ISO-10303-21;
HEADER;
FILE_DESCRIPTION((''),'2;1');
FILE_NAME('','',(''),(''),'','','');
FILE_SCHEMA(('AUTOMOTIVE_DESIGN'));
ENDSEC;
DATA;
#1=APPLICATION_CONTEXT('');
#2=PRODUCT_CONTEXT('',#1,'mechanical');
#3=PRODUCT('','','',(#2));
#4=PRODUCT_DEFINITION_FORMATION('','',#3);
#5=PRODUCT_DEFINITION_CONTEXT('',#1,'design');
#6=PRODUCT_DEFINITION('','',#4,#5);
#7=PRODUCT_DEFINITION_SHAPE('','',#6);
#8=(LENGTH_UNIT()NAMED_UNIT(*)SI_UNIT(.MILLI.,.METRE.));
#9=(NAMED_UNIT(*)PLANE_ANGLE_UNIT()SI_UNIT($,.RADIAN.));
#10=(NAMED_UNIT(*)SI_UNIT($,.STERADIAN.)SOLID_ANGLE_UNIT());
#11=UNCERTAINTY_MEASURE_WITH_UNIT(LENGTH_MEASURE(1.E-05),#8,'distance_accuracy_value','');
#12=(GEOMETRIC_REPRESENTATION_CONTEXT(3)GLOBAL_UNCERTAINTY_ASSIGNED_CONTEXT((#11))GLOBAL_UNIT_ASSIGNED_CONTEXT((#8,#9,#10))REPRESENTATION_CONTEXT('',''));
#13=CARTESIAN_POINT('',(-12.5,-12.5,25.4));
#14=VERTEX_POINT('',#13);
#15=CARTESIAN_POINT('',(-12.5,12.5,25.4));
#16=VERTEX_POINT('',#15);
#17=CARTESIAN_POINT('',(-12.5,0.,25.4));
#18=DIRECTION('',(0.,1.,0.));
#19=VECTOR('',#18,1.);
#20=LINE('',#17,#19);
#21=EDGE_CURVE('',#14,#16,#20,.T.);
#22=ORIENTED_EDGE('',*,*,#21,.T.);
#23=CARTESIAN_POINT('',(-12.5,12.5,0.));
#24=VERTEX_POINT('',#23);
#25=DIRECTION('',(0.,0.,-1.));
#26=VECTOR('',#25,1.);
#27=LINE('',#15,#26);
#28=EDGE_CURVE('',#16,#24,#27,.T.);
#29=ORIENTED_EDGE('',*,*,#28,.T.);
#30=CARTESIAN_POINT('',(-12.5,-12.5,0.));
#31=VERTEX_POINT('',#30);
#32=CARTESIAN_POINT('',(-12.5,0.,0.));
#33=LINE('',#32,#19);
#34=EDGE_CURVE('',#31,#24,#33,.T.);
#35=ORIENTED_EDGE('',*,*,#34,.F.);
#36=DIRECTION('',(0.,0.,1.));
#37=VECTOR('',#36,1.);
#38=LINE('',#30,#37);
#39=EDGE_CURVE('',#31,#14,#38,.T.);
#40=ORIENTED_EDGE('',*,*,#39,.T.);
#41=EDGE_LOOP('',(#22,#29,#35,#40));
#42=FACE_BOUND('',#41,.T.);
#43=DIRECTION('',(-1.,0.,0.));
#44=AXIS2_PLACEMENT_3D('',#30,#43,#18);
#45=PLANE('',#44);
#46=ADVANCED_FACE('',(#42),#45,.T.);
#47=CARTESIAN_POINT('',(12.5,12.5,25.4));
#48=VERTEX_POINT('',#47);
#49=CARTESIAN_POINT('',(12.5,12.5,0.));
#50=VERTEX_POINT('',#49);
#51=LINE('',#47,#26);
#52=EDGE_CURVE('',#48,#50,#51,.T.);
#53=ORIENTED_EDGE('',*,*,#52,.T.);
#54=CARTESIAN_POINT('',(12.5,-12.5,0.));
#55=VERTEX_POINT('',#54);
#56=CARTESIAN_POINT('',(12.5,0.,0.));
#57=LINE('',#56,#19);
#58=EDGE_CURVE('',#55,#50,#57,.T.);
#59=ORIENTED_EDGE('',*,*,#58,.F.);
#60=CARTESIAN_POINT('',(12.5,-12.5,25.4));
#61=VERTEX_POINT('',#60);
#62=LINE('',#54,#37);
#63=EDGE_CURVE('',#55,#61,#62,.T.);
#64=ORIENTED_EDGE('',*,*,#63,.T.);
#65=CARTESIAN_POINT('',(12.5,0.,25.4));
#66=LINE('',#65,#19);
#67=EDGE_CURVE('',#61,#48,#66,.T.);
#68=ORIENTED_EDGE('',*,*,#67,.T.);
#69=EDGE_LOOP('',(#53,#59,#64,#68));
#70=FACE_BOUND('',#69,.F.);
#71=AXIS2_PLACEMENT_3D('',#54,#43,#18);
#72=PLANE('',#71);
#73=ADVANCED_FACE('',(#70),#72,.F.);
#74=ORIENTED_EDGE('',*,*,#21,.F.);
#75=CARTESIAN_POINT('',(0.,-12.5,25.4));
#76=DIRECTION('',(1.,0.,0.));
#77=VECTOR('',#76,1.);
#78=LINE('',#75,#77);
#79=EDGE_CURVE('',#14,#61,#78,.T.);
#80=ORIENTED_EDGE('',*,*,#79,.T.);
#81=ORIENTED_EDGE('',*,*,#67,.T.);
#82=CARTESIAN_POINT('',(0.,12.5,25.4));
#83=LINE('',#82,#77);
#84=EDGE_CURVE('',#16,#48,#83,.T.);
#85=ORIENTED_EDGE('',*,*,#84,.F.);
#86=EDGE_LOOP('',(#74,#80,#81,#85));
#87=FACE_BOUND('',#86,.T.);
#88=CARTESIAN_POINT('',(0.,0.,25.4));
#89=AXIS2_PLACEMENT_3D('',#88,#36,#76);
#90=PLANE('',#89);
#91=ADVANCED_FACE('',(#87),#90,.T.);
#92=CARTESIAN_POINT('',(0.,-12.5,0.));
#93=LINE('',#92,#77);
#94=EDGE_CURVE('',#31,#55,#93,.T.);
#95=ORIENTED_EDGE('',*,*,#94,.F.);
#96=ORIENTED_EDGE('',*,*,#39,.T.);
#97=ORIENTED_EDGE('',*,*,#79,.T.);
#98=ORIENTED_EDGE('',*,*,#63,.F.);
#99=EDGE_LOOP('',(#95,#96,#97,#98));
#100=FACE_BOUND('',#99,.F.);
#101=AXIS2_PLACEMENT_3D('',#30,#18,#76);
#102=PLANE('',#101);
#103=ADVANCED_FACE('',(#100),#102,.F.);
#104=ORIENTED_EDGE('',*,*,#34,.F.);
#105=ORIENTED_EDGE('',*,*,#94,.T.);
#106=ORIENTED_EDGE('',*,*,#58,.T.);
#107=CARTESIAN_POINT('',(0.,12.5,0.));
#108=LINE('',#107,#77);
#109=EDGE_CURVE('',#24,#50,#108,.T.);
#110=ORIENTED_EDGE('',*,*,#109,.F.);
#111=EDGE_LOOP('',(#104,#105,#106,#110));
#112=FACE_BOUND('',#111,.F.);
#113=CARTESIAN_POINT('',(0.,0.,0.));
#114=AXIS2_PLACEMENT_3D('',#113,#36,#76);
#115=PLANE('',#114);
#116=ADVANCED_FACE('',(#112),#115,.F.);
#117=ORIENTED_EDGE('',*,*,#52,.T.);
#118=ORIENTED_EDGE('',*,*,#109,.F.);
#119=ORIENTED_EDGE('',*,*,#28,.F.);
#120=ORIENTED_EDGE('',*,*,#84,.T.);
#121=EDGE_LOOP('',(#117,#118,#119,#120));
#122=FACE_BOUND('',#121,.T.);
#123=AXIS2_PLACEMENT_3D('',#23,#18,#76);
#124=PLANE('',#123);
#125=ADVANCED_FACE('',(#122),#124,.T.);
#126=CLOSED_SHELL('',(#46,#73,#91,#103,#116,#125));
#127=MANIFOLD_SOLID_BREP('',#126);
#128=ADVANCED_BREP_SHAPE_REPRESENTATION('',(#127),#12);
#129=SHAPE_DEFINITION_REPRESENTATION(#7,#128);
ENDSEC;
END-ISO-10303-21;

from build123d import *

# Parameters (mm, degrees)
F0_W     = 25
F0_H     = 25
F1_DEPTH = 25.4
F4_DEPTH = 25


# Not quite as in the source:
# - the program builds the solid bodies; features that only make, move or delete a surface that nothing else refers to are left out


with BuildPart() as f1:
    # F0 (on Top) → F1 (new body)
    with BuildSketch(Plane.XY):
        Rectangle(F0_W, F0_H)
    extrude(amount=F1_DEPTH)

    # F0 (on Top) → F4 (join)
    with BuildSketch(Plane.XY):
        Rectangle(F0_W, F0_H)
    extrude(amount=F4_DEPTH)


solid = f1.part
